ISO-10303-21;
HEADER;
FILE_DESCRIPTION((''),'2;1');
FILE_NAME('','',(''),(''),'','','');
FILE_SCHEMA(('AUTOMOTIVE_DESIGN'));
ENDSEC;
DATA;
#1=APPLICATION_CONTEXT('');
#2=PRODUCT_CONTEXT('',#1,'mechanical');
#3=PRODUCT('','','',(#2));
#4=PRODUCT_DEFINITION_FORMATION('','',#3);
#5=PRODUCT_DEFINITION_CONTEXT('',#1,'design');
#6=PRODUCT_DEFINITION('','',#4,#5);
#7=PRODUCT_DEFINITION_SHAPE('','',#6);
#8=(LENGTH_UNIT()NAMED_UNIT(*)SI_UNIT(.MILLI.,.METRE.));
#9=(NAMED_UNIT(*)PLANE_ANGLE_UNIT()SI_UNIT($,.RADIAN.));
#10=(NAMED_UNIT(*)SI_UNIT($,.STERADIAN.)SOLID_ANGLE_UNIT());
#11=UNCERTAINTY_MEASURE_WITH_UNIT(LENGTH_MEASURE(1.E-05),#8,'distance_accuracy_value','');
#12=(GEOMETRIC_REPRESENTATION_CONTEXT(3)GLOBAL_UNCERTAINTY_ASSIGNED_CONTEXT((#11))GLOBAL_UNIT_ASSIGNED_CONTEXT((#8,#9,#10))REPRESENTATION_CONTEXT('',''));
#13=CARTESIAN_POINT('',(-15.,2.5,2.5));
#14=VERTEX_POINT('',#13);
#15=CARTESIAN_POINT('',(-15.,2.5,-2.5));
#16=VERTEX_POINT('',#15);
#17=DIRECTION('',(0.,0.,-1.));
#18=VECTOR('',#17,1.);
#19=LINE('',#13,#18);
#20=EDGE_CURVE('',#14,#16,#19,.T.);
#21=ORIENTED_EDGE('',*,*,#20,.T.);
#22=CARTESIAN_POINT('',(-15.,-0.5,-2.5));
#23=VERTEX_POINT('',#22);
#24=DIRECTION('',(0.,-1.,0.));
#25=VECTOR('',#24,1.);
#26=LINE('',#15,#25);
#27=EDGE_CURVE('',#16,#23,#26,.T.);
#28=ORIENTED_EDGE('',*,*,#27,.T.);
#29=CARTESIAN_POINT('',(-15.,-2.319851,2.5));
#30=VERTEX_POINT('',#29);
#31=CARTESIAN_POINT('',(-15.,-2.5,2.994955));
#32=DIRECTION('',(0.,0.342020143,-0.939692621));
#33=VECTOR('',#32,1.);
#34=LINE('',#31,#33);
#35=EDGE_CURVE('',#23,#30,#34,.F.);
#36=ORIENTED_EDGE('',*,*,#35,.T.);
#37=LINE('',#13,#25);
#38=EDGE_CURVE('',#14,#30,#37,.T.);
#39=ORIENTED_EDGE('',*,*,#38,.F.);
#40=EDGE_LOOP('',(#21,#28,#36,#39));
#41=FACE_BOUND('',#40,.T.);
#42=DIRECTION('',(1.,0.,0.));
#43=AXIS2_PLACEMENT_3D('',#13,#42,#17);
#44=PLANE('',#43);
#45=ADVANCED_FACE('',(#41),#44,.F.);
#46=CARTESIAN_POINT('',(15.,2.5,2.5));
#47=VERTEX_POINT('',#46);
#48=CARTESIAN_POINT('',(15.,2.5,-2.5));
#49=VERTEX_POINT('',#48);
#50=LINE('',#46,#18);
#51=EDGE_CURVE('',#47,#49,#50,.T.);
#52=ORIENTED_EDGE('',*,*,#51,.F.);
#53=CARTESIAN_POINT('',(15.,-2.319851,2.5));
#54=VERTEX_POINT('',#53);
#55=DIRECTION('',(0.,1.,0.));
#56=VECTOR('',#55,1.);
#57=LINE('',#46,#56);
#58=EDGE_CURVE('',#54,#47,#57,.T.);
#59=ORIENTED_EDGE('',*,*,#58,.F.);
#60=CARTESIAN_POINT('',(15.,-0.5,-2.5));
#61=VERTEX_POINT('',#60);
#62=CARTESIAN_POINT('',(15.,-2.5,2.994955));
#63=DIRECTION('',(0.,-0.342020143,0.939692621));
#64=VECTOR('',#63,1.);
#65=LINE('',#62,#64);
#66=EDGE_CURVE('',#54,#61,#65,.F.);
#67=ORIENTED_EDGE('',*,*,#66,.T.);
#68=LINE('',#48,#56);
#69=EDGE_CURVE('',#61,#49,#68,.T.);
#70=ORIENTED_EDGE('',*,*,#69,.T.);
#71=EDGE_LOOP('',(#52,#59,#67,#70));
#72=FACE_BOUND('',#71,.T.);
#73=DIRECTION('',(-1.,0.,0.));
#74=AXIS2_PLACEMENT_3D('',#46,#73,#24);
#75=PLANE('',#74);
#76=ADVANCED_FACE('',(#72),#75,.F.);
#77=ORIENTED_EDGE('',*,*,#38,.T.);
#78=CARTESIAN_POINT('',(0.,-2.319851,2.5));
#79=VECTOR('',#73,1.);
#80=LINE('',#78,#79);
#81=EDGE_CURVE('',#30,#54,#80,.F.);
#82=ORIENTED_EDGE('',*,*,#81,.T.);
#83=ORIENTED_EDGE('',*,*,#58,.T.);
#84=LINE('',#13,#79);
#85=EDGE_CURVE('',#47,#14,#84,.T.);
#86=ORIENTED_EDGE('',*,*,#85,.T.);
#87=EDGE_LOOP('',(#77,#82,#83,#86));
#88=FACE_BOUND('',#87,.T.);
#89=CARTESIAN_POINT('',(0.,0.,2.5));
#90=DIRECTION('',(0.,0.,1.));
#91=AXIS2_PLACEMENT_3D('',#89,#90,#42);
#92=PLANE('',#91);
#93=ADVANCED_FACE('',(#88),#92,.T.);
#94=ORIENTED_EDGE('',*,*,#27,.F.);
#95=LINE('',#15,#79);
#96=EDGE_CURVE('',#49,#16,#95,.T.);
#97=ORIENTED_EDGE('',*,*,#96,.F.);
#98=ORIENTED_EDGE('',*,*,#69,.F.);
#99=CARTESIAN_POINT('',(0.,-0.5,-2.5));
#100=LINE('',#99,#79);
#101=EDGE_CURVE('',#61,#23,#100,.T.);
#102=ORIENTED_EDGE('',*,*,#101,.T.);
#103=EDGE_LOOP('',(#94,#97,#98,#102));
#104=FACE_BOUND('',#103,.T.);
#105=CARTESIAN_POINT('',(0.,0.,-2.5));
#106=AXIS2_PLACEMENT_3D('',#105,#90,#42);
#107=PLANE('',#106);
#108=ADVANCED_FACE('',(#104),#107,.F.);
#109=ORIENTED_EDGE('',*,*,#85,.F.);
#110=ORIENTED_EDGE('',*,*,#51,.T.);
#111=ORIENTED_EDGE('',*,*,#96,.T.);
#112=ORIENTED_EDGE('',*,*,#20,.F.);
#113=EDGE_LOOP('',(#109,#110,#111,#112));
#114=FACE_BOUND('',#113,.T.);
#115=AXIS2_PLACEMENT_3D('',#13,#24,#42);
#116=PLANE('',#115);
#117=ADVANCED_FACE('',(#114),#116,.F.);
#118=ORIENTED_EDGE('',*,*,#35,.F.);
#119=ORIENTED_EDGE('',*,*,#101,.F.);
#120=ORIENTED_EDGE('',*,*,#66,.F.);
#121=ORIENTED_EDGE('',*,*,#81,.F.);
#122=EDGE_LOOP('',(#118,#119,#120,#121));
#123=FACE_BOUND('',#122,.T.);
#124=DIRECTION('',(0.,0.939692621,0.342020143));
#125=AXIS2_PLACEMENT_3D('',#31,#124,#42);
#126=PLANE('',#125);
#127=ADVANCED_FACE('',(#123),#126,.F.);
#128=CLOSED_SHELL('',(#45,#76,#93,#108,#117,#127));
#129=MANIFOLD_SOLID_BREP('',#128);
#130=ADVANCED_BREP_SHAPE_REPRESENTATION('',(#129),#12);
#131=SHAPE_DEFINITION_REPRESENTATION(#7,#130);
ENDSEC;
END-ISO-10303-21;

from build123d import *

# Parameters (mm, degrees)
SKETCH_1_W       = 30
SKETCH_1_H       = 5
EXTRUDE_1_DEPTH  = 2.5
CHAMFER_1_SIZE   = 5.494954839
CHAMFER_1_SIZE_2 = 2


with BuildPart() as part:
    # Эскиз1 → Бобышка-Вытянуть1 (new, symmetric)
    with BuildSketch(Plane.XY):
        Rectangle(SKETCH_1_W, SKETCH_1_H)
    extrude(amount=EXTRUDE_1_DEPTH, both=True)

    # Фаска1
    # the kernel refuses this chamfer: 5.494954839, 2 mm, written as the material it takes off along each edge
    with BuildSketch(Plane(origin=(29.254982899, -2.5, -2.5), x_dir=(0, -0.013184058198645794, 0.9999130865277316), z_dir=(-1, 0, 0))) as chamfer_1_piece_1:
        Polygon((CHAMFER_1_SIZE * 0.999913086511, CHAMFER_1_SIZE * 0.0131840581984), (-CHAMFER_1_SIZE_2 * 0.0131840581986, CHAMFER_1_SIZE_2 * 0.999913086528), (0, 0), align=None)
    extrude(amount=58.509965797, mode=Mode.SUBTRACT)


solid = part.part
